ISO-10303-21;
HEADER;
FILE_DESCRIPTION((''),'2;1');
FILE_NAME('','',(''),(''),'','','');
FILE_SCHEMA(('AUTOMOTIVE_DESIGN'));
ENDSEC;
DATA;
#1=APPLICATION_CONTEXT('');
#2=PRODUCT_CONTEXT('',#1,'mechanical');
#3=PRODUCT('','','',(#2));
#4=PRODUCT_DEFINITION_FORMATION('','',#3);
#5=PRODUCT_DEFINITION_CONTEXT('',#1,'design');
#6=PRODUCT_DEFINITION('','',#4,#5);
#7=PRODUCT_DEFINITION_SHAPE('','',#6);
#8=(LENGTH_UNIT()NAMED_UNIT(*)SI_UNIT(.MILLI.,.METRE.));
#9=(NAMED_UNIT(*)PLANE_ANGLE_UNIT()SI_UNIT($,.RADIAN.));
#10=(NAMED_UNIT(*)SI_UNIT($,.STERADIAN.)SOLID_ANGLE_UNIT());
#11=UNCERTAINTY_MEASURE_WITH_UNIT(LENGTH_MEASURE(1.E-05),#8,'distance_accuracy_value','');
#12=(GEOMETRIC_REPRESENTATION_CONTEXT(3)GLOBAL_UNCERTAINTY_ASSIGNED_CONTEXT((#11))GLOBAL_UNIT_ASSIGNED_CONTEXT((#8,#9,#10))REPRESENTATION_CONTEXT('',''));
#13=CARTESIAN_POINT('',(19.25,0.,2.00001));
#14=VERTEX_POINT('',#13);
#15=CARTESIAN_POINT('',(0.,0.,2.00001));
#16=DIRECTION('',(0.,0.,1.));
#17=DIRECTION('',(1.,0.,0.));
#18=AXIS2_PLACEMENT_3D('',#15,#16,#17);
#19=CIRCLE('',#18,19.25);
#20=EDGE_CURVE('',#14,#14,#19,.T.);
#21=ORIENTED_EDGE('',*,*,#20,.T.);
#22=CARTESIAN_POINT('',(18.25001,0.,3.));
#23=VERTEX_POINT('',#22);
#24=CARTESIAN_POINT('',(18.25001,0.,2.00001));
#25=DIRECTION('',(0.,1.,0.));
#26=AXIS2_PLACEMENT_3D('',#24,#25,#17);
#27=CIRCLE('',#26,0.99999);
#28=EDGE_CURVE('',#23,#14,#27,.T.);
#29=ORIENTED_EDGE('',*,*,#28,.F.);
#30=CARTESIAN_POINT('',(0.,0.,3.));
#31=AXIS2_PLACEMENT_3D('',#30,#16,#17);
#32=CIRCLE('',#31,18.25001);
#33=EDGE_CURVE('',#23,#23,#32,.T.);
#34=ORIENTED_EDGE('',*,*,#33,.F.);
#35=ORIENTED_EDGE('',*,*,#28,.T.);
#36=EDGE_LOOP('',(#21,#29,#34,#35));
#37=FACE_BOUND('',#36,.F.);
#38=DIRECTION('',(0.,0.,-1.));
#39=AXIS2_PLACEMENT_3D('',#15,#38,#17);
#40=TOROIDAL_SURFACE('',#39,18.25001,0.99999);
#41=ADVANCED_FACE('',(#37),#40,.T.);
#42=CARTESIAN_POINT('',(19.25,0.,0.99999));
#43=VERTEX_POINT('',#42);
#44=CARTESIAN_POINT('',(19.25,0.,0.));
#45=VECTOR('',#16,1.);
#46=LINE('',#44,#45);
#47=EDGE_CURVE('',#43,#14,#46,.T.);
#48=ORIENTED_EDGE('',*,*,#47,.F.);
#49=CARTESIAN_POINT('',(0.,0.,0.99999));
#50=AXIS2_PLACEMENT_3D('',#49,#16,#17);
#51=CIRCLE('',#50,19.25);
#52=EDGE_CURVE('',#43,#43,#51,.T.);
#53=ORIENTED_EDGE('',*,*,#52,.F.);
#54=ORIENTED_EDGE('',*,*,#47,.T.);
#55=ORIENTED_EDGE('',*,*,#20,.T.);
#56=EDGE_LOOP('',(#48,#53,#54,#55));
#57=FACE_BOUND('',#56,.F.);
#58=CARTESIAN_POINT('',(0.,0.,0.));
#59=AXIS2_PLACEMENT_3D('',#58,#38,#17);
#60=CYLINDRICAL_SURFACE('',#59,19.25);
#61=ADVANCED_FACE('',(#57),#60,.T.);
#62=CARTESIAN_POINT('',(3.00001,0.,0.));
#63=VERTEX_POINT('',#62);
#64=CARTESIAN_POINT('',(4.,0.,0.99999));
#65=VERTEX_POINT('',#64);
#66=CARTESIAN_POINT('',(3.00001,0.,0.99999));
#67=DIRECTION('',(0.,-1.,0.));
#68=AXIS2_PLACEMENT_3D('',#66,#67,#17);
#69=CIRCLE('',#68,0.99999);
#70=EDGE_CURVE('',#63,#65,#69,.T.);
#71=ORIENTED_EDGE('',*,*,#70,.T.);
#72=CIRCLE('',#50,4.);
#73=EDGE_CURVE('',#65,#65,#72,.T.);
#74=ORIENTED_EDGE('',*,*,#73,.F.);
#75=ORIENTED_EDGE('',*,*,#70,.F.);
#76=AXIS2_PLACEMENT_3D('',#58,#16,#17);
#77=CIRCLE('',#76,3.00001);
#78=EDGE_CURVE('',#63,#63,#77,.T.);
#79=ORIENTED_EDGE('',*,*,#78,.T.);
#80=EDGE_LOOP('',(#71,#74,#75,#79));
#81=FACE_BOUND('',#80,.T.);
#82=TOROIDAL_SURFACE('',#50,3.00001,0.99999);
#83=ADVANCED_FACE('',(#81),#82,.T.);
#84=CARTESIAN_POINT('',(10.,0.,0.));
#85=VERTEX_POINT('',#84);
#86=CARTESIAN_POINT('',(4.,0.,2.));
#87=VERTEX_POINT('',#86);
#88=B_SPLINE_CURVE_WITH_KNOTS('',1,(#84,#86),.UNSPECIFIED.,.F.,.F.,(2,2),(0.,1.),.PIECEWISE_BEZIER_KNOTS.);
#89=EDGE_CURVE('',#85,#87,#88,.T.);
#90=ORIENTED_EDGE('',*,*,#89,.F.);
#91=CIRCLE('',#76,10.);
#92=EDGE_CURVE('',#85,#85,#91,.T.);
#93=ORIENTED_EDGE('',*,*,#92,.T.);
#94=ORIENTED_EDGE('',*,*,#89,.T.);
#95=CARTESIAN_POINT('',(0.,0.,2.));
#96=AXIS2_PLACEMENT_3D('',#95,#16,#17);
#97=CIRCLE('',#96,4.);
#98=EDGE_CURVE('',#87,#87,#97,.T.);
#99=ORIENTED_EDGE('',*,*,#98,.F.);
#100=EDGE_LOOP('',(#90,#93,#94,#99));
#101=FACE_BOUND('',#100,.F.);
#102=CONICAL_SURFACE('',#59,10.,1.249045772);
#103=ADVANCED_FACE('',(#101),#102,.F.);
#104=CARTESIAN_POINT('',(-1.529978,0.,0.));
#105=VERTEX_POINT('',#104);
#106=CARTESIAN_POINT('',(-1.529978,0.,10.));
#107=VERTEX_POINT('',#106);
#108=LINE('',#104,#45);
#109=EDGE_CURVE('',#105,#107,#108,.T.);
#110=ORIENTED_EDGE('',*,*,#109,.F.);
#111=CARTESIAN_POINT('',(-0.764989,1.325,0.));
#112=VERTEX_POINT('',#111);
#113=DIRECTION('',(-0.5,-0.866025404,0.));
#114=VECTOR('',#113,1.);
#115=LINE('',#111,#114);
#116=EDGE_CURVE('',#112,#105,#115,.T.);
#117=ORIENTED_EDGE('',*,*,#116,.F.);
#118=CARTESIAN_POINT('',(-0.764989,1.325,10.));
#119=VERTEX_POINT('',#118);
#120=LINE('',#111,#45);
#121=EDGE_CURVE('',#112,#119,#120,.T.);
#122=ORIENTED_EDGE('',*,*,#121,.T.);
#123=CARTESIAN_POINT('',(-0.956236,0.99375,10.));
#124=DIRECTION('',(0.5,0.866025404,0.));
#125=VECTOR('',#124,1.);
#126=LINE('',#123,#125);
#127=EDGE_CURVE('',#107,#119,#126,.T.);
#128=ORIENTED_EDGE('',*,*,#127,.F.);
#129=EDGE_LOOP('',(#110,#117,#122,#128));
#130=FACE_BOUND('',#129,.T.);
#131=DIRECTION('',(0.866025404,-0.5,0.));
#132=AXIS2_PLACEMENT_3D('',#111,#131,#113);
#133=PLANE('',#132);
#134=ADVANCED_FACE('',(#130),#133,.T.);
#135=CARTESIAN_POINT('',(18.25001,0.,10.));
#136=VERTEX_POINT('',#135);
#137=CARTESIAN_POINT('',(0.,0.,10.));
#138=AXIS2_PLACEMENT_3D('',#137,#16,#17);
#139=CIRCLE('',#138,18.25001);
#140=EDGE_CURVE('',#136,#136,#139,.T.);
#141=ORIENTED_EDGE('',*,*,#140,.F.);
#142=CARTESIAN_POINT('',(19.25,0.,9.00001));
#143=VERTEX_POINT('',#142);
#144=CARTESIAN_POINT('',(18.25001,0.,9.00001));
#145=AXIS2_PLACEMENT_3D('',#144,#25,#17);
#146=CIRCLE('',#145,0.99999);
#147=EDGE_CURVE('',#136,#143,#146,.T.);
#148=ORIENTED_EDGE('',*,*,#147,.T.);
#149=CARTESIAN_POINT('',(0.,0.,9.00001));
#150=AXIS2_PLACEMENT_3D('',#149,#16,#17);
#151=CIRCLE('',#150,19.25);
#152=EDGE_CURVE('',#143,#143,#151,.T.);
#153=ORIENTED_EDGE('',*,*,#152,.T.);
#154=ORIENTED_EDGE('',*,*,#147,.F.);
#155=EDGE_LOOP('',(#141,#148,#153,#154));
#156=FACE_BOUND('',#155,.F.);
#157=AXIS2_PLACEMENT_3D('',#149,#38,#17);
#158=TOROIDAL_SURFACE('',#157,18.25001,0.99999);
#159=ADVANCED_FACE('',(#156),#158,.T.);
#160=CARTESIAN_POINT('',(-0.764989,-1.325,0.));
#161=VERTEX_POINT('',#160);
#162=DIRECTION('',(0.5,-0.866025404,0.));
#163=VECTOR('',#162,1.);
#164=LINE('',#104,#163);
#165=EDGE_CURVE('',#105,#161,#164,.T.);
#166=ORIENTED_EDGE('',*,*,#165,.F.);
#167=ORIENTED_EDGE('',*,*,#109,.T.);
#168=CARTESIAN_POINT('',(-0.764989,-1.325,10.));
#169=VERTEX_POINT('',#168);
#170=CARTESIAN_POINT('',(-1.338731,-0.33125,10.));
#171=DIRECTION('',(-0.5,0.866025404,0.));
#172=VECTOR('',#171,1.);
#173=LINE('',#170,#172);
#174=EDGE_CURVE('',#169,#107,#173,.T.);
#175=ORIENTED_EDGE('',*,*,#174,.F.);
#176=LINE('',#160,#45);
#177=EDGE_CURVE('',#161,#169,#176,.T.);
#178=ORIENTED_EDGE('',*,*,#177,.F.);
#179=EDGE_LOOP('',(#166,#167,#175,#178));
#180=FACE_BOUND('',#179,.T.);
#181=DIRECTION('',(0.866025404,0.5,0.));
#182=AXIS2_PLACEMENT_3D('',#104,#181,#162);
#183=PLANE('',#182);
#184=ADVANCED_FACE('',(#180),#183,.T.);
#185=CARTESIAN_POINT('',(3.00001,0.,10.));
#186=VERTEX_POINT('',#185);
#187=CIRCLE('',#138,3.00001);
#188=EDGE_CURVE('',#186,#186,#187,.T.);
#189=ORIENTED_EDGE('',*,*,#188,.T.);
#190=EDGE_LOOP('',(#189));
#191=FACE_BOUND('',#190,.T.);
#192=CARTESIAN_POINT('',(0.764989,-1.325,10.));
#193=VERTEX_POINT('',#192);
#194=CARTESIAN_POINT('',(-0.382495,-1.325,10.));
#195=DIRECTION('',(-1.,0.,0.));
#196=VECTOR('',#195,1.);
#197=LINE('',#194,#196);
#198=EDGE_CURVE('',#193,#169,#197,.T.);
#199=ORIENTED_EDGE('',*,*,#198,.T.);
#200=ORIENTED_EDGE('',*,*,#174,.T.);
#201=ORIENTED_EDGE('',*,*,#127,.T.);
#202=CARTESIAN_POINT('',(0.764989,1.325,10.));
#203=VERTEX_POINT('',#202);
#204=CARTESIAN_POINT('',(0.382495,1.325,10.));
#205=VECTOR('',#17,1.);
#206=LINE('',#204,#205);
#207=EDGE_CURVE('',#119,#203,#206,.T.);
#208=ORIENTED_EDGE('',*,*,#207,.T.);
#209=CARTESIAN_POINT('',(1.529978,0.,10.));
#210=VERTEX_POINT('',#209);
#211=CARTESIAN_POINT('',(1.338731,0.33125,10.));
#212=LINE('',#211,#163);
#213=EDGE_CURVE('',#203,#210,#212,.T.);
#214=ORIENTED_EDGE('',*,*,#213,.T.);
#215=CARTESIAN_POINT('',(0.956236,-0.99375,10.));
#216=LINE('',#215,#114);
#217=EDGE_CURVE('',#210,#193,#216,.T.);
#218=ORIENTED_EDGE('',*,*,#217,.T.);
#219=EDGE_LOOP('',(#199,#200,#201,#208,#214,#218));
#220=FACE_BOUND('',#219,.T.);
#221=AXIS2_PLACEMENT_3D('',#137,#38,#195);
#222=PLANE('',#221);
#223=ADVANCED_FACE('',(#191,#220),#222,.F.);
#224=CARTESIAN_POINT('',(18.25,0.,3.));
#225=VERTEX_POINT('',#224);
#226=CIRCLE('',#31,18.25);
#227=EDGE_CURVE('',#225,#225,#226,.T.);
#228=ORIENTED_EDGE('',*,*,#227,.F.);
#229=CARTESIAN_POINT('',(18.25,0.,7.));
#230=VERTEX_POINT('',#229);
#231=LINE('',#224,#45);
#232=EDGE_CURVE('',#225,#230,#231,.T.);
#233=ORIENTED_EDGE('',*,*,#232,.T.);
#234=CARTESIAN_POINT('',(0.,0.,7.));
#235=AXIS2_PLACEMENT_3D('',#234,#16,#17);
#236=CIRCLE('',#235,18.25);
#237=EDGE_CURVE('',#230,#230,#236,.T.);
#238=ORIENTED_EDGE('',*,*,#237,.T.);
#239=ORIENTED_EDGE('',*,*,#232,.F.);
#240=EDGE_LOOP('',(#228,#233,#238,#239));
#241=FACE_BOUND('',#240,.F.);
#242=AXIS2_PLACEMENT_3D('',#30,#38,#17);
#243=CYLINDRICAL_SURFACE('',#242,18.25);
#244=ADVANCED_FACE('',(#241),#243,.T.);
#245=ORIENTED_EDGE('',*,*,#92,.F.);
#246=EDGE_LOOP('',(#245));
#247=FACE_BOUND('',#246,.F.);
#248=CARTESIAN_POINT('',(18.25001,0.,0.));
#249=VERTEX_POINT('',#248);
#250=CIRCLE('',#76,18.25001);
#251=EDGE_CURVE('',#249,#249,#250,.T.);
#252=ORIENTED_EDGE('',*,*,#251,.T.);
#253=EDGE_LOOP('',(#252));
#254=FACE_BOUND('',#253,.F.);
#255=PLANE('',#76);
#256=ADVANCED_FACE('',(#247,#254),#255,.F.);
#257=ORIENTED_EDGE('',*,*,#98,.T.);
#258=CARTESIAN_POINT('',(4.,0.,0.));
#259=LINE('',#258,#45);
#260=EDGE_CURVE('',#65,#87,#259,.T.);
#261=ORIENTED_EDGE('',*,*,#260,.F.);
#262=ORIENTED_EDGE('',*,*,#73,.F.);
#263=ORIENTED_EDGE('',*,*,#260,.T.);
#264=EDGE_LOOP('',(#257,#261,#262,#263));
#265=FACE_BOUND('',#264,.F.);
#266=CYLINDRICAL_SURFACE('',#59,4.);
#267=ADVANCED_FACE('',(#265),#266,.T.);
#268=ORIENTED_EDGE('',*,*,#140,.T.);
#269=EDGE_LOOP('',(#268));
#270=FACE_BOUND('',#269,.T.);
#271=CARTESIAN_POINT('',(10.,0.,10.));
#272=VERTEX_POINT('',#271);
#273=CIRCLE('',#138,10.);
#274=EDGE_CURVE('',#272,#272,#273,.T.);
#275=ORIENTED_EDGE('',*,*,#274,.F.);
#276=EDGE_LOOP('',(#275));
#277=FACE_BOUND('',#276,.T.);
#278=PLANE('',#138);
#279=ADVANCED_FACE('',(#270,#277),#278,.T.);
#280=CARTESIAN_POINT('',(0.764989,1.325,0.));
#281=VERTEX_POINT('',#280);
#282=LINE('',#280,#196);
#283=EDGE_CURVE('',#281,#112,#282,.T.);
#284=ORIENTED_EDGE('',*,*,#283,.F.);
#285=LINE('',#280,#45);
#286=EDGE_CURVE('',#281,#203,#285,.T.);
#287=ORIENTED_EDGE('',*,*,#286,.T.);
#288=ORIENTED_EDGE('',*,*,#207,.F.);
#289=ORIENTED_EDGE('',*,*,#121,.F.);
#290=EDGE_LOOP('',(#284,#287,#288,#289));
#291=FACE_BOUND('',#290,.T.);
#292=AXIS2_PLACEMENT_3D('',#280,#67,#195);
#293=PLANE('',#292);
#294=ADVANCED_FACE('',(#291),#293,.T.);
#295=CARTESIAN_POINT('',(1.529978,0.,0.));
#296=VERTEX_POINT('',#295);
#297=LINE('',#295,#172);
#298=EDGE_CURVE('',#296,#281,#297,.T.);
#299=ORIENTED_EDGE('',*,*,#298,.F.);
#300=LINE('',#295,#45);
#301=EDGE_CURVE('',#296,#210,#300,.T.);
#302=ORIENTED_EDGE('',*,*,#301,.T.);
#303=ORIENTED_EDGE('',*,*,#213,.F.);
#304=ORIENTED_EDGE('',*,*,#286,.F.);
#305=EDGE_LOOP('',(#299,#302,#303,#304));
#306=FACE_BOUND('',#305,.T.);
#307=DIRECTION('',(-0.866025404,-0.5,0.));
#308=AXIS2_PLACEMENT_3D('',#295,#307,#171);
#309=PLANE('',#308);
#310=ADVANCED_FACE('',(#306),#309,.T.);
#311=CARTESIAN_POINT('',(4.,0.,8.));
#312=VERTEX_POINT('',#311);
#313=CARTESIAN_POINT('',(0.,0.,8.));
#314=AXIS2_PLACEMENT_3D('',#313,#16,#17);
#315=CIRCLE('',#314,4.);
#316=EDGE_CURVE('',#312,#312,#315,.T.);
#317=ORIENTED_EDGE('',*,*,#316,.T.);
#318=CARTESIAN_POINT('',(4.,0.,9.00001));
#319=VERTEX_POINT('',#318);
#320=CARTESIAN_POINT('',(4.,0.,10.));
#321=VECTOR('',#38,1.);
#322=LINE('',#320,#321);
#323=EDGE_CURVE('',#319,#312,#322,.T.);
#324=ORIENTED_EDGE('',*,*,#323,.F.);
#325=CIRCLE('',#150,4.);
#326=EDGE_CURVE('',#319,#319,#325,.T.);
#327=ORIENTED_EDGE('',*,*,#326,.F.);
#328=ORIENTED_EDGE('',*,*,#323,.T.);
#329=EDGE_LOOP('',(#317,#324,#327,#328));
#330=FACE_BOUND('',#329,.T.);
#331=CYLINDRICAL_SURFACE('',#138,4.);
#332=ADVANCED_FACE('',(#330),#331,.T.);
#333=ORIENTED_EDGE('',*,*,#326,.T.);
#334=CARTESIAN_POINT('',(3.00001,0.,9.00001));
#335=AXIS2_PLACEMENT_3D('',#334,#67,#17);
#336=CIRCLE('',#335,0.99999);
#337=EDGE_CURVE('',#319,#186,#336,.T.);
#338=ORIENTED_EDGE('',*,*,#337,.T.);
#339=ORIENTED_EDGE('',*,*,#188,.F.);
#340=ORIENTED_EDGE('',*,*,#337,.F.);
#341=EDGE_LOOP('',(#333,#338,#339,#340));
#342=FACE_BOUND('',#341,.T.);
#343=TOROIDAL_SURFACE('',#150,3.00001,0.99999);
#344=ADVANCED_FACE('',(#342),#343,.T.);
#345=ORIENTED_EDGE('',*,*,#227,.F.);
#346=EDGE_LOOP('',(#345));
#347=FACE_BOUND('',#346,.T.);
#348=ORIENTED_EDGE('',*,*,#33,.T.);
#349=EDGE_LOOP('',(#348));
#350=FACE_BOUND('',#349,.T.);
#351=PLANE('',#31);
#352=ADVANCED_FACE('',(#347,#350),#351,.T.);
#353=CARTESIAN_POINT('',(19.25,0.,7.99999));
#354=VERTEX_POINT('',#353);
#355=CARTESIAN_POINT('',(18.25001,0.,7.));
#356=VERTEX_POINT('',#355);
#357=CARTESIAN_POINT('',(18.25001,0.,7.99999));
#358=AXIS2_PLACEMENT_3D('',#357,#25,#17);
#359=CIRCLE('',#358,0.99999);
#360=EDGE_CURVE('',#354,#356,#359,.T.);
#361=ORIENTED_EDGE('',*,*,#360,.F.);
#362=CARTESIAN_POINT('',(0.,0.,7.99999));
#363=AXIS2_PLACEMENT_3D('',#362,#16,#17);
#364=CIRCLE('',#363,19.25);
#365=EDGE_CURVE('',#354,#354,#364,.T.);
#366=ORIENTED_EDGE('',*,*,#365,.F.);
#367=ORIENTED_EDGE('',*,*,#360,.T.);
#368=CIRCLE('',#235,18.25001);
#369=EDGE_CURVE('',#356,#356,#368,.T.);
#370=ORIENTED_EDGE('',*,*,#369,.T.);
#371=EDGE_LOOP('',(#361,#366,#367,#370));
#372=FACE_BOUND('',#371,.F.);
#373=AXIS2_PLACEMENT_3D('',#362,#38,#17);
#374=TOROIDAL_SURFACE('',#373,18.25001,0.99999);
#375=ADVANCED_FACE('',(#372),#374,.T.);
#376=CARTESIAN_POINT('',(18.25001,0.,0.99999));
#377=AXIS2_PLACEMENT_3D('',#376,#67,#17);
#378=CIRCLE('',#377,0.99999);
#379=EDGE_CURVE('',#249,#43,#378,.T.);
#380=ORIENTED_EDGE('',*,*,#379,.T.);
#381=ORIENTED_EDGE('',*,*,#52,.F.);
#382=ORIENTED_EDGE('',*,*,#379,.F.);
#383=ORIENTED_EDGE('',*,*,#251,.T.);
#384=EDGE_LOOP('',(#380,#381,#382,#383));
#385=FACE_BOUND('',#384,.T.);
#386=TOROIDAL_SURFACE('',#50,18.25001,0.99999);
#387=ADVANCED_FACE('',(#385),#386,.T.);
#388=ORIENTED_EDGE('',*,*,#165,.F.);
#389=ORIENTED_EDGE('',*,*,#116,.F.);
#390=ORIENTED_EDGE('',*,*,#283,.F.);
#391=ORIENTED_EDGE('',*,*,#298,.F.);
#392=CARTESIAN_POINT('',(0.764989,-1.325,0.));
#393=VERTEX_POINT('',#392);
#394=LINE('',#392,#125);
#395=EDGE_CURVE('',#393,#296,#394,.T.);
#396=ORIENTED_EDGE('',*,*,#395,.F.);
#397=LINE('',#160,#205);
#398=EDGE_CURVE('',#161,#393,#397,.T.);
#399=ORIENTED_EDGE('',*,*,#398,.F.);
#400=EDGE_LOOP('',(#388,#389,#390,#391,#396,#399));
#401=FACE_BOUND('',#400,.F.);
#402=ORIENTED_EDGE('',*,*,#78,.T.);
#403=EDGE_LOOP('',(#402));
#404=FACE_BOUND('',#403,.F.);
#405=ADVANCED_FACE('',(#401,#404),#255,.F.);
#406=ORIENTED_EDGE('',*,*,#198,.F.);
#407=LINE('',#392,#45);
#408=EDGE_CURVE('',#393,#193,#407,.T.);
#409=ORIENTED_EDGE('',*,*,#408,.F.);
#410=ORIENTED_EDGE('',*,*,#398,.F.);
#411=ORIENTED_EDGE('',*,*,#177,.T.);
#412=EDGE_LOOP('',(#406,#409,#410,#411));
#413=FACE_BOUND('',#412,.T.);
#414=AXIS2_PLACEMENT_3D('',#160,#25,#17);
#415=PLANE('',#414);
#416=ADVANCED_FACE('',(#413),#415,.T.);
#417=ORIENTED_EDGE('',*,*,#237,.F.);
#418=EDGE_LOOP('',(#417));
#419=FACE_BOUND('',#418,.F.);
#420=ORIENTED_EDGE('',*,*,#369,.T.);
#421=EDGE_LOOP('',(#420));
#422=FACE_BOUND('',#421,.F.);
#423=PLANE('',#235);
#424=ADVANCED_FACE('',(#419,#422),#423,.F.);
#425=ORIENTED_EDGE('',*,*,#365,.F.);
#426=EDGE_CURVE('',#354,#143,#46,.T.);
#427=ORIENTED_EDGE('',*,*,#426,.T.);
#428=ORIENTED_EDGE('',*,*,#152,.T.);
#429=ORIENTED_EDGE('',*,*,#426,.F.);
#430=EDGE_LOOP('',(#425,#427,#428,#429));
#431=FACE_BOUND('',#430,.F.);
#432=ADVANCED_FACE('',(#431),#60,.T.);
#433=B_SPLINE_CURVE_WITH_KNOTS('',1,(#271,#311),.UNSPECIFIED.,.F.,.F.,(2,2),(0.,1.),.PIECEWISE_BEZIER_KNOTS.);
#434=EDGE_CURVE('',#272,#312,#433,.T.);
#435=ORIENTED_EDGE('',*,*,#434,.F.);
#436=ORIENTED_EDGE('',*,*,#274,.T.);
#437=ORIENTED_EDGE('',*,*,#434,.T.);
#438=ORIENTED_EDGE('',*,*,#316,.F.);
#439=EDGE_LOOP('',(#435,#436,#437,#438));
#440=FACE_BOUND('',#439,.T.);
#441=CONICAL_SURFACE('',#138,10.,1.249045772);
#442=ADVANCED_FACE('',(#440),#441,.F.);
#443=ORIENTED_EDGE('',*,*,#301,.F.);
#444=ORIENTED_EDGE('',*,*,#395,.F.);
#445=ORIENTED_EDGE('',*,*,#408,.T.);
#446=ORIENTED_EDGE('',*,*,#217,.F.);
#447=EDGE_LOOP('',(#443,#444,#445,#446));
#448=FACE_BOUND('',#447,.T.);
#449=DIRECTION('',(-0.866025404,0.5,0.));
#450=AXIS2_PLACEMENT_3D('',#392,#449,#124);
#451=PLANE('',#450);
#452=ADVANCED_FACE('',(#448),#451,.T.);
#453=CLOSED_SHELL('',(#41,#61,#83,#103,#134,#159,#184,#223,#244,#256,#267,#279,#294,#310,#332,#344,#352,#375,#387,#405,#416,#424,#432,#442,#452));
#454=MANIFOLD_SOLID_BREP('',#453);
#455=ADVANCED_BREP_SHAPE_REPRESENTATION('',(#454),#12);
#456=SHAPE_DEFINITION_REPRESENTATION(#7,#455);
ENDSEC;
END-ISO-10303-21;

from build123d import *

# Parameters (mm, degrees)
F0_R      = 19.25
F0_R_2    = 1
F1_DEPTH  = 10
F4_R      = 10
F3_R      = 4
F8_R      = 10
F7_R      = 4
F11_R     = 4
F11_R_2   = 1
F12_DEPTH = 2
F14_R     = 19.25
F14_R_2   = 18.25
F15_DEPTH = 4
F16_R     = 0.99999
F18_DEPTH = 25


# Not quite as in the source:
# - a fillet or chamfer is up to 0.001 mm smaller than in the source, because OpenCascade refuses the exact size
# - a feature of the source that left no trace in its solid (it failed there, or was rolled back) is left out
# - a pattern or mirror of a feature is missing from the dataset's text; its kind, count and spacing are read off the source's solid


with BuildPart() as f1:
    # F0 (on Top) → F1 (new body)
    with BuildSketch(Plane.XY):
        Circle(F0_R)
        Circle(F0_R_2, mode=Mode.SUBTRACT)
    extrude(amount=F1_DEPTH)

    # F4 (on face) → F5 section 0
    with BuildSketch(Plane.XY.offset(10)):
        Circle(F4_R)
    # F3 (on offset) → F5 section 1
    with BuildSketch(Plane.XY.offset(8)):
        Circle(F3_R)
    loft(mode=Mode.SUBTRACT)

    # F8 (on face) → F9 section 0
    with BuildSketch(Plane.XY):
        Circle(F8_R)
    # F7 (on offset) → F9 section 1
    with BuildSketch(Plane.XY.offset(2)):
        Circle(F7_R)
    loft(mode=Mode.SUBTRACT)

    # F11 (on face) → F12 (join, through all)
    with BuildSketch(Plane.XY):
        Circle(F11_R)
        Circle(F11_R_2, mode=Mode.SUBTRACT)
    f12 = extrude(amount=F12_DEPTH)

    # F12_copies: F12 across plane
    add(f12.mirror(Plane.XY.offset(5)))

    # F14 (on offset) → F15 (cut)
    with BuildSketch(Plane.XY.offset(3)):
        Circle(F14_R)
        Circle(F14_R_2, mode=Mode.SUBTRACT)
    extrude(amount=F15_DEPTH, mode=Mode.SUBTRACT)

    # F16 (radius 1 in the source; OpenCascade refuses exactly that, so slightly less here)
    f16_edges = [f1.edges().sort_by_distance(p)[0] for p in [
        (-4, 0, 0),
        (-19.25, 0, 10),
        (-19.25, 0, 0),
        (-19.25, 0, 7),
        (-19.25, 0, 3),
        (-4, 0, 10),
    ]]
    fillet(f16_edges, radius=F16_R)

    # F17 (on Top) → F18 (cut)
    with BuildSketch(Plane.XY):
        Polygon((0.7649891067, 1.325), (-0.7649891067, 1.325), (-1.5299782134, 0), (-0.7649891067, -1.325), (0.7649891067, -1.325), (1.5299782134, 0), align=None)
    extrude(amount=F18_DEPTH, mode=Mode.SUBTRACT)


solid = f1.part
